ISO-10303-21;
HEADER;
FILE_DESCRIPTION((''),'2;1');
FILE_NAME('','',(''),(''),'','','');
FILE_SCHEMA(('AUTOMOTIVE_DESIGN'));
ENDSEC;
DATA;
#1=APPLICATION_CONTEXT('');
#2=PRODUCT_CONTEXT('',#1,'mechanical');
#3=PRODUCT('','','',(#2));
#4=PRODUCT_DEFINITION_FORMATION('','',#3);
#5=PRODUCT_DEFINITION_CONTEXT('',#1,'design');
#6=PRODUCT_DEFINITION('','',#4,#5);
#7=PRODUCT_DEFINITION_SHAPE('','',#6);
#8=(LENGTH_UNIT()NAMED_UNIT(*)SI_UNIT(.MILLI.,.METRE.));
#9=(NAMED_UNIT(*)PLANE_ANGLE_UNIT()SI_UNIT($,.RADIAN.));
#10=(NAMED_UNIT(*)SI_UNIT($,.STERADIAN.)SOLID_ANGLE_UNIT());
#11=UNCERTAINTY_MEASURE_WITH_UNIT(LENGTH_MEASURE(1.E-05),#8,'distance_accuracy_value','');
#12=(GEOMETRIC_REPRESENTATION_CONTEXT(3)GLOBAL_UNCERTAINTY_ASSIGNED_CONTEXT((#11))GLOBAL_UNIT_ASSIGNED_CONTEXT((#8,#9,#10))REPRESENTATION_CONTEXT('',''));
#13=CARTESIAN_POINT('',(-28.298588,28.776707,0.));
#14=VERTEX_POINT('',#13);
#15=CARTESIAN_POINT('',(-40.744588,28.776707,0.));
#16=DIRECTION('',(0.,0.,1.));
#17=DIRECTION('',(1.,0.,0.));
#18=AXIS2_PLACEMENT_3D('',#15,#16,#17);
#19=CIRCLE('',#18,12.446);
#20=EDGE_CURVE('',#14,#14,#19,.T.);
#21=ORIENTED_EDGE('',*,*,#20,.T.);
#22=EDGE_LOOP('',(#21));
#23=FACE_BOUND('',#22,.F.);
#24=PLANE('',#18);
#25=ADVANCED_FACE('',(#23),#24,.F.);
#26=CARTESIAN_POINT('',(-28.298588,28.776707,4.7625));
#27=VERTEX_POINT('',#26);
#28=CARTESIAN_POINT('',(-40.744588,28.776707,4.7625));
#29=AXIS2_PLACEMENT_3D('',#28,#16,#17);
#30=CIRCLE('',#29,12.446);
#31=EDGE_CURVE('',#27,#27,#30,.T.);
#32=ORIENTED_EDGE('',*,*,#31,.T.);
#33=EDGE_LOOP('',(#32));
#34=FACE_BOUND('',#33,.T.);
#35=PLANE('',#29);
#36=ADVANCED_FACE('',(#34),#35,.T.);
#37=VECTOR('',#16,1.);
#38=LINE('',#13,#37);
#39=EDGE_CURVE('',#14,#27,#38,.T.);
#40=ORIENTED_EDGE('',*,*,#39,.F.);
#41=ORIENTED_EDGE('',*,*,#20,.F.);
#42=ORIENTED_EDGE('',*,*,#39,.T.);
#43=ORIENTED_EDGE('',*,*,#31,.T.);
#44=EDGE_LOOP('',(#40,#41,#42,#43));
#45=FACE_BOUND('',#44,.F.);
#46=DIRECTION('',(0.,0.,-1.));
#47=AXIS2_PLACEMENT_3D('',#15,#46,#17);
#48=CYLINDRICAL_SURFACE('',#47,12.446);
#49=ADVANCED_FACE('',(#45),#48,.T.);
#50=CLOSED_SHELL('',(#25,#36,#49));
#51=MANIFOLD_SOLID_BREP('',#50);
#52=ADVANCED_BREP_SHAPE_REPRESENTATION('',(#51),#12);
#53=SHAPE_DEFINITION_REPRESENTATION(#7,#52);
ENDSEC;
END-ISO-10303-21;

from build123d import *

# Parameters (mm, degrees)
F0_R     = 12.446
F2_DEPTH = 4.7625


# Not quite as in the source:
# - a length typed as a fraction of an inch, garbled in the dataset ("3 / 203.2 mm" for 3/8 in), is restored
# - the program builds the solid bodies; features that only make, move or delete a surface that nothing else refers to are left out


with BuildPart() as f2:
    # F0 (on Top) → F2 (new body)
    with BuildSketch(Plane.XY):
        with Locations((-40.744587779, 28.7767071277)):
            Circle(F0_R)
    extrude(amount=F2_DEPTH)


solid = f2.part
